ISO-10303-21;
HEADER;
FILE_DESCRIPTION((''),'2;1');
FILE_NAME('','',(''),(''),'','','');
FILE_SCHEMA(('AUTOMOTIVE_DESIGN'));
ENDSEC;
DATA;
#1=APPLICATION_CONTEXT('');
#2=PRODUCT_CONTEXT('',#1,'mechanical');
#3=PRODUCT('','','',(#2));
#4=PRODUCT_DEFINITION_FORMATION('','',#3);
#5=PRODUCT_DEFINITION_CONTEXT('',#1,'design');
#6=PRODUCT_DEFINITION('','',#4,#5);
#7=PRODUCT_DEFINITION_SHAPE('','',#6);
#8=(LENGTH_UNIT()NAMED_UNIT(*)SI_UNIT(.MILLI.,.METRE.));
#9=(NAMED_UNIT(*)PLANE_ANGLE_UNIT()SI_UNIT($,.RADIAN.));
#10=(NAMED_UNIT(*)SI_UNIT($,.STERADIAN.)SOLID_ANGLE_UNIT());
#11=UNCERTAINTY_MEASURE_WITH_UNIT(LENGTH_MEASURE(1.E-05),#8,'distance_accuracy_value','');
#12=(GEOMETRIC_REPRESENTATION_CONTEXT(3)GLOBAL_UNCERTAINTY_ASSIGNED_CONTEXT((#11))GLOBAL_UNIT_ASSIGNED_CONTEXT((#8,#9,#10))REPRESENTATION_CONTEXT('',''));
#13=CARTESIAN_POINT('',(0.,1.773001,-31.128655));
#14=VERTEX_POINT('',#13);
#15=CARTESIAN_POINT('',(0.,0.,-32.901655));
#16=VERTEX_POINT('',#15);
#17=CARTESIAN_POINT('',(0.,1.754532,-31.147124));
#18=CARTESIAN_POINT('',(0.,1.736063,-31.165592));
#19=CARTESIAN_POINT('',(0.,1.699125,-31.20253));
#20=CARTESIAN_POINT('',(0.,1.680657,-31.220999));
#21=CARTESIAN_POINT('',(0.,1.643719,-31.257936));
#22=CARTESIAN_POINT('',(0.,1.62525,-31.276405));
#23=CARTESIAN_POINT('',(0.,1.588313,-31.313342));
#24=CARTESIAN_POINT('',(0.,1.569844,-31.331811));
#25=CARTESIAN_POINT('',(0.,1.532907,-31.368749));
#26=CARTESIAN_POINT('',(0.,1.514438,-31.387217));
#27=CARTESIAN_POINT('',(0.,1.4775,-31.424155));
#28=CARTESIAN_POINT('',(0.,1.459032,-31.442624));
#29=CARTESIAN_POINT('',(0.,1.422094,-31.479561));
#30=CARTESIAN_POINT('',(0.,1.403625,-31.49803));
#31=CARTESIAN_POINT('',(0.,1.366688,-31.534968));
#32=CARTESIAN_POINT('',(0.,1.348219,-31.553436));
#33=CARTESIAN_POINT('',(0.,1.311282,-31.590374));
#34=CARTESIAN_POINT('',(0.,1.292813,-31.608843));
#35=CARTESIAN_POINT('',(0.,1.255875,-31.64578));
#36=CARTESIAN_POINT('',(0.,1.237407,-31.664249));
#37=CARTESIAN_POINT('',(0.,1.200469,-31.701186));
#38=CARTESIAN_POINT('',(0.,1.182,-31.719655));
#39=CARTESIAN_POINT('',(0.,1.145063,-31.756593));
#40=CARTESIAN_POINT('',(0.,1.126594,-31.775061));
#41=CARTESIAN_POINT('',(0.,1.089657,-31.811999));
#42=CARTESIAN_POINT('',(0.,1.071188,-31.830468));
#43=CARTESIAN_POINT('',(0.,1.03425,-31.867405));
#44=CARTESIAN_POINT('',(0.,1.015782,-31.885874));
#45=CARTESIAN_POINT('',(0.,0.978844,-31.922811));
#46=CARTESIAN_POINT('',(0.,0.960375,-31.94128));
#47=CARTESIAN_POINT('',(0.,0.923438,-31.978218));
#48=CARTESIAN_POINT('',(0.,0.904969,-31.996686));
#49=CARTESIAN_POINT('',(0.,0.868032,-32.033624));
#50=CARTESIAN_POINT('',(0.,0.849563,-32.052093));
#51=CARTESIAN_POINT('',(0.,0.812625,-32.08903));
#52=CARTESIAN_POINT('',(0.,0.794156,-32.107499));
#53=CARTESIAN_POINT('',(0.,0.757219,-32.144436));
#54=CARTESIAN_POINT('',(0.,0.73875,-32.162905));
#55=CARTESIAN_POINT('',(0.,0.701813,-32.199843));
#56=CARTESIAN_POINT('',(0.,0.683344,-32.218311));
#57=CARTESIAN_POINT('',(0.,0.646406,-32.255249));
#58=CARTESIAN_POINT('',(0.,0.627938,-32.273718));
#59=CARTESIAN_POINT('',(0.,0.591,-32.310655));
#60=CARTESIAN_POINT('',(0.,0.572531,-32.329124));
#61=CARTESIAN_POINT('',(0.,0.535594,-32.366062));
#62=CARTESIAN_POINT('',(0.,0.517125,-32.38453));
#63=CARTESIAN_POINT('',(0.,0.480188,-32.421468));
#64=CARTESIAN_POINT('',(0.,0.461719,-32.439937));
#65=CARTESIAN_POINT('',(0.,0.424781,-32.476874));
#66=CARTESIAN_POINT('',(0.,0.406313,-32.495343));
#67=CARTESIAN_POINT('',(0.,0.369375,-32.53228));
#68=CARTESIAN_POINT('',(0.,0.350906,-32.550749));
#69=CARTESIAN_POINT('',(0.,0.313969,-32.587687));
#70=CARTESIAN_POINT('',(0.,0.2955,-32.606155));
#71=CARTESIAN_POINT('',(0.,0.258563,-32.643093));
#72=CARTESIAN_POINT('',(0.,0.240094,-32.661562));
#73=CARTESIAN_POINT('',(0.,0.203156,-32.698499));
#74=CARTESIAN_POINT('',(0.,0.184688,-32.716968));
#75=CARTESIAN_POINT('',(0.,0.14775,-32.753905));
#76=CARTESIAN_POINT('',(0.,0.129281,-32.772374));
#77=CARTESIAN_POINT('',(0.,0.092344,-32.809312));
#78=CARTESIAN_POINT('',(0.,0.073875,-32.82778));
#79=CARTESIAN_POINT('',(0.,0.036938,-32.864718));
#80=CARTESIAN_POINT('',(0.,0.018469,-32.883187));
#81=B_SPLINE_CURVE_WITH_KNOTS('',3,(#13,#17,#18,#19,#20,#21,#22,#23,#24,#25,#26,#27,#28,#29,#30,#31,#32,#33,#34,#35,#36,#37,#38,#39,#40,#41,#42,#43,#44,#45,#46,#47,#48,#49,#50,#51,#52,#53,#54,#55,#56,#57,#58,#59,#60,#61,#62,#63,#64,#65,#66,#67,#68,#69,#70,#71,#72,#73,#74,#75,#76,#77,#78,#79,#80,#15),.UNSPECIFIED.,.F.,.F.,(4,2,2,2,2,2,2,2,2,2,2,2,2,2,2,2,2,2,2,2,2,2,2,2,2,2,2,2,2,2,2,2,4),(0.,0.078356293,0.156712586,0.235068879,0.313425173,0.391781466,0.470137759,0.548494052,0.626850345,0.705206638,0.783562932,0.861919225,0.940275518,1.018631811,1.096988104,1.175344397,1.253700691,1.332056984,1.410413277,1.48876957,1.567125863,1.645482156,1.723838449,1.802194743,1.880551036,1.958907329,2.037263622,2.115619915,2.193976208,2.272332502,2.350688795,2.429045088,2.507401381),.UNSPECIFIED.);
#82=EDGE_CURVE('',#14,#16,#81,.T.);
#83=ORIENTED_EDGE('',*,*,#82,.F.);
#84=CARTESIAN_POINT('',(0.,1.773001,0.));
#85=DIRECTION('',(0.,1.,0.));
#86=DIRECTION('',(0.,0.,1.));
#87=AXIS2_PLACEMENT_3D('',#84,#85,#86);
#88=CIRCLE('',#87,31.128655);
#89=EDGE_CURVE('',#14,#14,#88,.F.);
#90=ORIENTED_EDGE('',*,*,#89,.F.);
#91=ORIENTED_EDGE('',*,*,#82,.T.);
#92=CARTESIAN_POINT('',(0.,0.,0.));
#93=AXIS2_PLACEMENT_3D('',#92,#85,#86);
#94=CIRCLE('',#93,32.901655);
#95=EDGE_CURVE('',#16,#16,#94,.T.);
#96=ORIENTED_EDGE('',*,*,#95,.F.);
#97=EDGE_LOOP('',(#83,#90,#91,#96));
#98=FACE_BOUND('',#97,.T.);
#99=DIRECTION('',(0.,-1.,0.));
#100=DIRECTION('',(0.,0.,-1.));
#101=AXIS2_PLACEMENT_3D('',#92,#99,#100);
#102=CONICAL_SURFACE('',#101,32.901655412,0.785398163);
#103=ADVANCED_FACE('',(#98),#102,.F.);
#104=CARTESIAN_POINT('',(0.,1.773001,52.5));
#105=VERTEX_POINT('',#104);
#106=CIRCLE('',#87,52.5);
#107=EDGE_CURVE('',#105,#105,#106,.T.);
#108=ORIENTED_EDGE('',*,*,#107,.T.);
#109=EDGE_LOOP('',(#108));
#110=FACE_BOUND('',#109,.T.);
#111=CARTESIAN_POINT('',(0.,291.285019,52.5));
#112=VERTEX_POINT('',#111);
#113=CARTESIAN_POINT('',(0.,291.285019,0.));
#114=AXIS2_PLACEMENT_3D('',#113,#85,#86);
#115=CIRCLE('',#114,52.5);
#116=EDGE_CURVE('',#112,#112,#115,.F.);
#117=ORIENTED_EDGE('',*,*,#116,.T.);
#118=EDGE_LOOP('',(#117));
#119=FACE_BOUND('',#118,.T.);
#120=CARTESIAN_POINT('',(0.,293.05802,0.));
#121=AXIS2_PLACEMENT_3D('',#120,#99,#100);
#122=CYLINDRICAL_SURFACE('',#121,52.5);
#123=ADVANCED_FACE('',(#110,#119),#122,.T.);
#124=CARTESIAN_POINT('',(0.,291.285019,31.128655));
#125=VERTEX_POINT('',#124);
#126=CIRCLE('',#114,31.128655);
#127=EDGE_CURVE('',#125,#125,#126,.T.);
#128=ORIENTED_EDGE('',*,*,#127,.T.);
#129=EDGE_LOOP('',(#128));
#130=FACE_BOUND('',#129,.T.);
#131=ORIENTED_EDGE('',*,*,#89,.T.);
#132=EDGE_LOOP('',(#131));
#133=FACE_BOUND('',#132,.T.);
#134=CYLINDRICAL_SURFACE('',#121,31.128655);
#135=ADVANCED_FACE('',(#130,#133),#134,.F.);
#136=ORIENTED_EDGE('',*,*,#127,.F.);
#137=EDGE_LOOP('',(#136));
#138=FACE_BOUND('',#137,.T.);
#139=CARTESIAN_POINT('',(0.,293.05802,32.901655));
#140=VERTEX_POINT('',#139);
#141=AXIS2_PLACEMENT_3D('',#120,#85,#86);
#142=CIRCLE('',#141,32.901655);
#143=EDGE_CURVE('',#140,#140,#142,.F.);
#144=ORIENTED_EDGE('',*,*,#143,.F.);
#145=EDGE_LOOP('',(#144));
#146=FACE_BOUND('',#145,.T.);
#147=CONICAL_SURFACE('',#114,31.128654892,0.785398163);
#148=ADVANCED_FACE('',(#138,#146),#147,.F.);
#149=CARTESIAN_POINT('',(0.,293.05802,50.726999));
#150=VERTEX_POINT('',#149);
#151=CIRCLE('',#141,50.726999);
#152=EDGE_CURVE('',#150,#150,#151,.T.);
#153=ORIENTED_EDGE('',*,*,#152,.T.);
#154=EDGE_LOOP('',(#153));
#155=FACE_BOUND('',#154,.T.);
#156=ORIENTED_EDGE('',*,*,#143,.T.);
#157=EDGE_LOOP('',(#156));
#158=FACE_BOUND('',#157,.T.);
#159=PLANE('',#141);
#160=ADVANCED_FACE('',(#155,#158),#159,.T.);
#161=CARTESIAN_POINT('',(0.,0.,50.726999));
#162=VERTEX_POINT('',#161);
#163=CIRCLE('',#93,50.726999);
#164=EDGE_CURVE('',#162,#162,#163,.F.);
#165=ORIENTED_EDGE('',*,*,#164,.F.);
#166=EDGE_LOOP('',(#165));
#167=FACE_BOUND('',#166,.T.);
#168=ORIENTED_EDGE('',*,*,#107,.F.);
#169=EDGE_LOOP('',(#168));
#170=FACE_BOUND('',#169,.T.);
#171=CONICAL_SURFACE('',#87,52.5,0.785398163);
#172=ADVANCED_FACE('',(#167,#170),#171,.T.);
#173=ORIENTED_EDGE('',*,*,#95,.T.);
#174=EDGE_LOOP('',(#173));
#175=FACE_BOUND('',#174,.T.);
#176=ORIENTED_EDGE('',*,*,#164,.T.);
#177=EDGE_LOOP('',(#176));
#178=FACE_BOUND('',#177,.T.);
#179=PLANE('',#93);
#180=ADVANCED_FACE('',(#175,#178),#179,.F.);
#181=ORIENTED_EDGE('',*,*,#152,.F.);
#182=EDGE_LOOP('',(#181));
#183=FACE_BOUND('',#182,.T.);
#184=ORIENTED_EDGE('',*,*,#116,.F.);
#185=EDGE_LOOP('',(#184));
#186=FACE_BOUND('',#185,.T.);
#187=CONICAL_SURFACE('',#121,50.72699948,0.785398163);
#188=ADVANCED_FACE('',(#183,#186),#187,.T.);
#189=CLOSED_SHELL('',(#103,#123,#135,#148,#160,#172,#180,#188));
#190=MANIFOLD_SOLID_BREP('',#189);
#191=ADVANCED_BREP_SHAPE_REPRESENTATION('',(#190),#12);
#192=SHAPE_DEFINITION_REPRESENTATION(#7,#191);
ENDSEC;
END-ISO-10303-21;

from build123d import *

# Parameters (mm, degrees)
SKETCH1_R           = 52.5
BOSS_EXTRUDE1_DEPTH = 293.05801973
SKETCH2_R           = 31.128654892
CUT_EXTRUDE1_DEPTH  = 303.316891569
CHAMFER1_SIZE       = 1.77300052


with BuildPart() as part:
    # Sketch1 → Boss-Extrude1 (new body)
    with BuildSketch(Plane(origin=(0, 0, 0), x_dir=(1, 0, 0), z_dir=(0, 1, 0))):
        Circle(SKETCH1_R)
    extrude(amount=BOSS_EXTRUDE1_DEPTH)

    # Sketch2 → Cut-Extrude1 (cut, through all)
    with BuildSketch(Plane(origin=(0, 0, 0), x_dir=(1, 0, 0), z_dir=(0, 1, 0))):
        Circle(SKETCH2_R)
    extrude(amount=CUT_EXTRUDE1_DEPTH, mode=Mode.SUBTRACT)

    # Chamfer1
    chamfer1_edges = [part.edges().sort_by_distance(p)[0] for p in [
        (-31.128654892, 293.05801973, 0),
        (-31.128654892, 0, 0),
        (-52.5, 0, 0),
        (-52.5, 293.05801973, 0),
    ]]
    chamfer(chamfer1_edges, length=CHAMFER1_SIZE)


solid = part.part
